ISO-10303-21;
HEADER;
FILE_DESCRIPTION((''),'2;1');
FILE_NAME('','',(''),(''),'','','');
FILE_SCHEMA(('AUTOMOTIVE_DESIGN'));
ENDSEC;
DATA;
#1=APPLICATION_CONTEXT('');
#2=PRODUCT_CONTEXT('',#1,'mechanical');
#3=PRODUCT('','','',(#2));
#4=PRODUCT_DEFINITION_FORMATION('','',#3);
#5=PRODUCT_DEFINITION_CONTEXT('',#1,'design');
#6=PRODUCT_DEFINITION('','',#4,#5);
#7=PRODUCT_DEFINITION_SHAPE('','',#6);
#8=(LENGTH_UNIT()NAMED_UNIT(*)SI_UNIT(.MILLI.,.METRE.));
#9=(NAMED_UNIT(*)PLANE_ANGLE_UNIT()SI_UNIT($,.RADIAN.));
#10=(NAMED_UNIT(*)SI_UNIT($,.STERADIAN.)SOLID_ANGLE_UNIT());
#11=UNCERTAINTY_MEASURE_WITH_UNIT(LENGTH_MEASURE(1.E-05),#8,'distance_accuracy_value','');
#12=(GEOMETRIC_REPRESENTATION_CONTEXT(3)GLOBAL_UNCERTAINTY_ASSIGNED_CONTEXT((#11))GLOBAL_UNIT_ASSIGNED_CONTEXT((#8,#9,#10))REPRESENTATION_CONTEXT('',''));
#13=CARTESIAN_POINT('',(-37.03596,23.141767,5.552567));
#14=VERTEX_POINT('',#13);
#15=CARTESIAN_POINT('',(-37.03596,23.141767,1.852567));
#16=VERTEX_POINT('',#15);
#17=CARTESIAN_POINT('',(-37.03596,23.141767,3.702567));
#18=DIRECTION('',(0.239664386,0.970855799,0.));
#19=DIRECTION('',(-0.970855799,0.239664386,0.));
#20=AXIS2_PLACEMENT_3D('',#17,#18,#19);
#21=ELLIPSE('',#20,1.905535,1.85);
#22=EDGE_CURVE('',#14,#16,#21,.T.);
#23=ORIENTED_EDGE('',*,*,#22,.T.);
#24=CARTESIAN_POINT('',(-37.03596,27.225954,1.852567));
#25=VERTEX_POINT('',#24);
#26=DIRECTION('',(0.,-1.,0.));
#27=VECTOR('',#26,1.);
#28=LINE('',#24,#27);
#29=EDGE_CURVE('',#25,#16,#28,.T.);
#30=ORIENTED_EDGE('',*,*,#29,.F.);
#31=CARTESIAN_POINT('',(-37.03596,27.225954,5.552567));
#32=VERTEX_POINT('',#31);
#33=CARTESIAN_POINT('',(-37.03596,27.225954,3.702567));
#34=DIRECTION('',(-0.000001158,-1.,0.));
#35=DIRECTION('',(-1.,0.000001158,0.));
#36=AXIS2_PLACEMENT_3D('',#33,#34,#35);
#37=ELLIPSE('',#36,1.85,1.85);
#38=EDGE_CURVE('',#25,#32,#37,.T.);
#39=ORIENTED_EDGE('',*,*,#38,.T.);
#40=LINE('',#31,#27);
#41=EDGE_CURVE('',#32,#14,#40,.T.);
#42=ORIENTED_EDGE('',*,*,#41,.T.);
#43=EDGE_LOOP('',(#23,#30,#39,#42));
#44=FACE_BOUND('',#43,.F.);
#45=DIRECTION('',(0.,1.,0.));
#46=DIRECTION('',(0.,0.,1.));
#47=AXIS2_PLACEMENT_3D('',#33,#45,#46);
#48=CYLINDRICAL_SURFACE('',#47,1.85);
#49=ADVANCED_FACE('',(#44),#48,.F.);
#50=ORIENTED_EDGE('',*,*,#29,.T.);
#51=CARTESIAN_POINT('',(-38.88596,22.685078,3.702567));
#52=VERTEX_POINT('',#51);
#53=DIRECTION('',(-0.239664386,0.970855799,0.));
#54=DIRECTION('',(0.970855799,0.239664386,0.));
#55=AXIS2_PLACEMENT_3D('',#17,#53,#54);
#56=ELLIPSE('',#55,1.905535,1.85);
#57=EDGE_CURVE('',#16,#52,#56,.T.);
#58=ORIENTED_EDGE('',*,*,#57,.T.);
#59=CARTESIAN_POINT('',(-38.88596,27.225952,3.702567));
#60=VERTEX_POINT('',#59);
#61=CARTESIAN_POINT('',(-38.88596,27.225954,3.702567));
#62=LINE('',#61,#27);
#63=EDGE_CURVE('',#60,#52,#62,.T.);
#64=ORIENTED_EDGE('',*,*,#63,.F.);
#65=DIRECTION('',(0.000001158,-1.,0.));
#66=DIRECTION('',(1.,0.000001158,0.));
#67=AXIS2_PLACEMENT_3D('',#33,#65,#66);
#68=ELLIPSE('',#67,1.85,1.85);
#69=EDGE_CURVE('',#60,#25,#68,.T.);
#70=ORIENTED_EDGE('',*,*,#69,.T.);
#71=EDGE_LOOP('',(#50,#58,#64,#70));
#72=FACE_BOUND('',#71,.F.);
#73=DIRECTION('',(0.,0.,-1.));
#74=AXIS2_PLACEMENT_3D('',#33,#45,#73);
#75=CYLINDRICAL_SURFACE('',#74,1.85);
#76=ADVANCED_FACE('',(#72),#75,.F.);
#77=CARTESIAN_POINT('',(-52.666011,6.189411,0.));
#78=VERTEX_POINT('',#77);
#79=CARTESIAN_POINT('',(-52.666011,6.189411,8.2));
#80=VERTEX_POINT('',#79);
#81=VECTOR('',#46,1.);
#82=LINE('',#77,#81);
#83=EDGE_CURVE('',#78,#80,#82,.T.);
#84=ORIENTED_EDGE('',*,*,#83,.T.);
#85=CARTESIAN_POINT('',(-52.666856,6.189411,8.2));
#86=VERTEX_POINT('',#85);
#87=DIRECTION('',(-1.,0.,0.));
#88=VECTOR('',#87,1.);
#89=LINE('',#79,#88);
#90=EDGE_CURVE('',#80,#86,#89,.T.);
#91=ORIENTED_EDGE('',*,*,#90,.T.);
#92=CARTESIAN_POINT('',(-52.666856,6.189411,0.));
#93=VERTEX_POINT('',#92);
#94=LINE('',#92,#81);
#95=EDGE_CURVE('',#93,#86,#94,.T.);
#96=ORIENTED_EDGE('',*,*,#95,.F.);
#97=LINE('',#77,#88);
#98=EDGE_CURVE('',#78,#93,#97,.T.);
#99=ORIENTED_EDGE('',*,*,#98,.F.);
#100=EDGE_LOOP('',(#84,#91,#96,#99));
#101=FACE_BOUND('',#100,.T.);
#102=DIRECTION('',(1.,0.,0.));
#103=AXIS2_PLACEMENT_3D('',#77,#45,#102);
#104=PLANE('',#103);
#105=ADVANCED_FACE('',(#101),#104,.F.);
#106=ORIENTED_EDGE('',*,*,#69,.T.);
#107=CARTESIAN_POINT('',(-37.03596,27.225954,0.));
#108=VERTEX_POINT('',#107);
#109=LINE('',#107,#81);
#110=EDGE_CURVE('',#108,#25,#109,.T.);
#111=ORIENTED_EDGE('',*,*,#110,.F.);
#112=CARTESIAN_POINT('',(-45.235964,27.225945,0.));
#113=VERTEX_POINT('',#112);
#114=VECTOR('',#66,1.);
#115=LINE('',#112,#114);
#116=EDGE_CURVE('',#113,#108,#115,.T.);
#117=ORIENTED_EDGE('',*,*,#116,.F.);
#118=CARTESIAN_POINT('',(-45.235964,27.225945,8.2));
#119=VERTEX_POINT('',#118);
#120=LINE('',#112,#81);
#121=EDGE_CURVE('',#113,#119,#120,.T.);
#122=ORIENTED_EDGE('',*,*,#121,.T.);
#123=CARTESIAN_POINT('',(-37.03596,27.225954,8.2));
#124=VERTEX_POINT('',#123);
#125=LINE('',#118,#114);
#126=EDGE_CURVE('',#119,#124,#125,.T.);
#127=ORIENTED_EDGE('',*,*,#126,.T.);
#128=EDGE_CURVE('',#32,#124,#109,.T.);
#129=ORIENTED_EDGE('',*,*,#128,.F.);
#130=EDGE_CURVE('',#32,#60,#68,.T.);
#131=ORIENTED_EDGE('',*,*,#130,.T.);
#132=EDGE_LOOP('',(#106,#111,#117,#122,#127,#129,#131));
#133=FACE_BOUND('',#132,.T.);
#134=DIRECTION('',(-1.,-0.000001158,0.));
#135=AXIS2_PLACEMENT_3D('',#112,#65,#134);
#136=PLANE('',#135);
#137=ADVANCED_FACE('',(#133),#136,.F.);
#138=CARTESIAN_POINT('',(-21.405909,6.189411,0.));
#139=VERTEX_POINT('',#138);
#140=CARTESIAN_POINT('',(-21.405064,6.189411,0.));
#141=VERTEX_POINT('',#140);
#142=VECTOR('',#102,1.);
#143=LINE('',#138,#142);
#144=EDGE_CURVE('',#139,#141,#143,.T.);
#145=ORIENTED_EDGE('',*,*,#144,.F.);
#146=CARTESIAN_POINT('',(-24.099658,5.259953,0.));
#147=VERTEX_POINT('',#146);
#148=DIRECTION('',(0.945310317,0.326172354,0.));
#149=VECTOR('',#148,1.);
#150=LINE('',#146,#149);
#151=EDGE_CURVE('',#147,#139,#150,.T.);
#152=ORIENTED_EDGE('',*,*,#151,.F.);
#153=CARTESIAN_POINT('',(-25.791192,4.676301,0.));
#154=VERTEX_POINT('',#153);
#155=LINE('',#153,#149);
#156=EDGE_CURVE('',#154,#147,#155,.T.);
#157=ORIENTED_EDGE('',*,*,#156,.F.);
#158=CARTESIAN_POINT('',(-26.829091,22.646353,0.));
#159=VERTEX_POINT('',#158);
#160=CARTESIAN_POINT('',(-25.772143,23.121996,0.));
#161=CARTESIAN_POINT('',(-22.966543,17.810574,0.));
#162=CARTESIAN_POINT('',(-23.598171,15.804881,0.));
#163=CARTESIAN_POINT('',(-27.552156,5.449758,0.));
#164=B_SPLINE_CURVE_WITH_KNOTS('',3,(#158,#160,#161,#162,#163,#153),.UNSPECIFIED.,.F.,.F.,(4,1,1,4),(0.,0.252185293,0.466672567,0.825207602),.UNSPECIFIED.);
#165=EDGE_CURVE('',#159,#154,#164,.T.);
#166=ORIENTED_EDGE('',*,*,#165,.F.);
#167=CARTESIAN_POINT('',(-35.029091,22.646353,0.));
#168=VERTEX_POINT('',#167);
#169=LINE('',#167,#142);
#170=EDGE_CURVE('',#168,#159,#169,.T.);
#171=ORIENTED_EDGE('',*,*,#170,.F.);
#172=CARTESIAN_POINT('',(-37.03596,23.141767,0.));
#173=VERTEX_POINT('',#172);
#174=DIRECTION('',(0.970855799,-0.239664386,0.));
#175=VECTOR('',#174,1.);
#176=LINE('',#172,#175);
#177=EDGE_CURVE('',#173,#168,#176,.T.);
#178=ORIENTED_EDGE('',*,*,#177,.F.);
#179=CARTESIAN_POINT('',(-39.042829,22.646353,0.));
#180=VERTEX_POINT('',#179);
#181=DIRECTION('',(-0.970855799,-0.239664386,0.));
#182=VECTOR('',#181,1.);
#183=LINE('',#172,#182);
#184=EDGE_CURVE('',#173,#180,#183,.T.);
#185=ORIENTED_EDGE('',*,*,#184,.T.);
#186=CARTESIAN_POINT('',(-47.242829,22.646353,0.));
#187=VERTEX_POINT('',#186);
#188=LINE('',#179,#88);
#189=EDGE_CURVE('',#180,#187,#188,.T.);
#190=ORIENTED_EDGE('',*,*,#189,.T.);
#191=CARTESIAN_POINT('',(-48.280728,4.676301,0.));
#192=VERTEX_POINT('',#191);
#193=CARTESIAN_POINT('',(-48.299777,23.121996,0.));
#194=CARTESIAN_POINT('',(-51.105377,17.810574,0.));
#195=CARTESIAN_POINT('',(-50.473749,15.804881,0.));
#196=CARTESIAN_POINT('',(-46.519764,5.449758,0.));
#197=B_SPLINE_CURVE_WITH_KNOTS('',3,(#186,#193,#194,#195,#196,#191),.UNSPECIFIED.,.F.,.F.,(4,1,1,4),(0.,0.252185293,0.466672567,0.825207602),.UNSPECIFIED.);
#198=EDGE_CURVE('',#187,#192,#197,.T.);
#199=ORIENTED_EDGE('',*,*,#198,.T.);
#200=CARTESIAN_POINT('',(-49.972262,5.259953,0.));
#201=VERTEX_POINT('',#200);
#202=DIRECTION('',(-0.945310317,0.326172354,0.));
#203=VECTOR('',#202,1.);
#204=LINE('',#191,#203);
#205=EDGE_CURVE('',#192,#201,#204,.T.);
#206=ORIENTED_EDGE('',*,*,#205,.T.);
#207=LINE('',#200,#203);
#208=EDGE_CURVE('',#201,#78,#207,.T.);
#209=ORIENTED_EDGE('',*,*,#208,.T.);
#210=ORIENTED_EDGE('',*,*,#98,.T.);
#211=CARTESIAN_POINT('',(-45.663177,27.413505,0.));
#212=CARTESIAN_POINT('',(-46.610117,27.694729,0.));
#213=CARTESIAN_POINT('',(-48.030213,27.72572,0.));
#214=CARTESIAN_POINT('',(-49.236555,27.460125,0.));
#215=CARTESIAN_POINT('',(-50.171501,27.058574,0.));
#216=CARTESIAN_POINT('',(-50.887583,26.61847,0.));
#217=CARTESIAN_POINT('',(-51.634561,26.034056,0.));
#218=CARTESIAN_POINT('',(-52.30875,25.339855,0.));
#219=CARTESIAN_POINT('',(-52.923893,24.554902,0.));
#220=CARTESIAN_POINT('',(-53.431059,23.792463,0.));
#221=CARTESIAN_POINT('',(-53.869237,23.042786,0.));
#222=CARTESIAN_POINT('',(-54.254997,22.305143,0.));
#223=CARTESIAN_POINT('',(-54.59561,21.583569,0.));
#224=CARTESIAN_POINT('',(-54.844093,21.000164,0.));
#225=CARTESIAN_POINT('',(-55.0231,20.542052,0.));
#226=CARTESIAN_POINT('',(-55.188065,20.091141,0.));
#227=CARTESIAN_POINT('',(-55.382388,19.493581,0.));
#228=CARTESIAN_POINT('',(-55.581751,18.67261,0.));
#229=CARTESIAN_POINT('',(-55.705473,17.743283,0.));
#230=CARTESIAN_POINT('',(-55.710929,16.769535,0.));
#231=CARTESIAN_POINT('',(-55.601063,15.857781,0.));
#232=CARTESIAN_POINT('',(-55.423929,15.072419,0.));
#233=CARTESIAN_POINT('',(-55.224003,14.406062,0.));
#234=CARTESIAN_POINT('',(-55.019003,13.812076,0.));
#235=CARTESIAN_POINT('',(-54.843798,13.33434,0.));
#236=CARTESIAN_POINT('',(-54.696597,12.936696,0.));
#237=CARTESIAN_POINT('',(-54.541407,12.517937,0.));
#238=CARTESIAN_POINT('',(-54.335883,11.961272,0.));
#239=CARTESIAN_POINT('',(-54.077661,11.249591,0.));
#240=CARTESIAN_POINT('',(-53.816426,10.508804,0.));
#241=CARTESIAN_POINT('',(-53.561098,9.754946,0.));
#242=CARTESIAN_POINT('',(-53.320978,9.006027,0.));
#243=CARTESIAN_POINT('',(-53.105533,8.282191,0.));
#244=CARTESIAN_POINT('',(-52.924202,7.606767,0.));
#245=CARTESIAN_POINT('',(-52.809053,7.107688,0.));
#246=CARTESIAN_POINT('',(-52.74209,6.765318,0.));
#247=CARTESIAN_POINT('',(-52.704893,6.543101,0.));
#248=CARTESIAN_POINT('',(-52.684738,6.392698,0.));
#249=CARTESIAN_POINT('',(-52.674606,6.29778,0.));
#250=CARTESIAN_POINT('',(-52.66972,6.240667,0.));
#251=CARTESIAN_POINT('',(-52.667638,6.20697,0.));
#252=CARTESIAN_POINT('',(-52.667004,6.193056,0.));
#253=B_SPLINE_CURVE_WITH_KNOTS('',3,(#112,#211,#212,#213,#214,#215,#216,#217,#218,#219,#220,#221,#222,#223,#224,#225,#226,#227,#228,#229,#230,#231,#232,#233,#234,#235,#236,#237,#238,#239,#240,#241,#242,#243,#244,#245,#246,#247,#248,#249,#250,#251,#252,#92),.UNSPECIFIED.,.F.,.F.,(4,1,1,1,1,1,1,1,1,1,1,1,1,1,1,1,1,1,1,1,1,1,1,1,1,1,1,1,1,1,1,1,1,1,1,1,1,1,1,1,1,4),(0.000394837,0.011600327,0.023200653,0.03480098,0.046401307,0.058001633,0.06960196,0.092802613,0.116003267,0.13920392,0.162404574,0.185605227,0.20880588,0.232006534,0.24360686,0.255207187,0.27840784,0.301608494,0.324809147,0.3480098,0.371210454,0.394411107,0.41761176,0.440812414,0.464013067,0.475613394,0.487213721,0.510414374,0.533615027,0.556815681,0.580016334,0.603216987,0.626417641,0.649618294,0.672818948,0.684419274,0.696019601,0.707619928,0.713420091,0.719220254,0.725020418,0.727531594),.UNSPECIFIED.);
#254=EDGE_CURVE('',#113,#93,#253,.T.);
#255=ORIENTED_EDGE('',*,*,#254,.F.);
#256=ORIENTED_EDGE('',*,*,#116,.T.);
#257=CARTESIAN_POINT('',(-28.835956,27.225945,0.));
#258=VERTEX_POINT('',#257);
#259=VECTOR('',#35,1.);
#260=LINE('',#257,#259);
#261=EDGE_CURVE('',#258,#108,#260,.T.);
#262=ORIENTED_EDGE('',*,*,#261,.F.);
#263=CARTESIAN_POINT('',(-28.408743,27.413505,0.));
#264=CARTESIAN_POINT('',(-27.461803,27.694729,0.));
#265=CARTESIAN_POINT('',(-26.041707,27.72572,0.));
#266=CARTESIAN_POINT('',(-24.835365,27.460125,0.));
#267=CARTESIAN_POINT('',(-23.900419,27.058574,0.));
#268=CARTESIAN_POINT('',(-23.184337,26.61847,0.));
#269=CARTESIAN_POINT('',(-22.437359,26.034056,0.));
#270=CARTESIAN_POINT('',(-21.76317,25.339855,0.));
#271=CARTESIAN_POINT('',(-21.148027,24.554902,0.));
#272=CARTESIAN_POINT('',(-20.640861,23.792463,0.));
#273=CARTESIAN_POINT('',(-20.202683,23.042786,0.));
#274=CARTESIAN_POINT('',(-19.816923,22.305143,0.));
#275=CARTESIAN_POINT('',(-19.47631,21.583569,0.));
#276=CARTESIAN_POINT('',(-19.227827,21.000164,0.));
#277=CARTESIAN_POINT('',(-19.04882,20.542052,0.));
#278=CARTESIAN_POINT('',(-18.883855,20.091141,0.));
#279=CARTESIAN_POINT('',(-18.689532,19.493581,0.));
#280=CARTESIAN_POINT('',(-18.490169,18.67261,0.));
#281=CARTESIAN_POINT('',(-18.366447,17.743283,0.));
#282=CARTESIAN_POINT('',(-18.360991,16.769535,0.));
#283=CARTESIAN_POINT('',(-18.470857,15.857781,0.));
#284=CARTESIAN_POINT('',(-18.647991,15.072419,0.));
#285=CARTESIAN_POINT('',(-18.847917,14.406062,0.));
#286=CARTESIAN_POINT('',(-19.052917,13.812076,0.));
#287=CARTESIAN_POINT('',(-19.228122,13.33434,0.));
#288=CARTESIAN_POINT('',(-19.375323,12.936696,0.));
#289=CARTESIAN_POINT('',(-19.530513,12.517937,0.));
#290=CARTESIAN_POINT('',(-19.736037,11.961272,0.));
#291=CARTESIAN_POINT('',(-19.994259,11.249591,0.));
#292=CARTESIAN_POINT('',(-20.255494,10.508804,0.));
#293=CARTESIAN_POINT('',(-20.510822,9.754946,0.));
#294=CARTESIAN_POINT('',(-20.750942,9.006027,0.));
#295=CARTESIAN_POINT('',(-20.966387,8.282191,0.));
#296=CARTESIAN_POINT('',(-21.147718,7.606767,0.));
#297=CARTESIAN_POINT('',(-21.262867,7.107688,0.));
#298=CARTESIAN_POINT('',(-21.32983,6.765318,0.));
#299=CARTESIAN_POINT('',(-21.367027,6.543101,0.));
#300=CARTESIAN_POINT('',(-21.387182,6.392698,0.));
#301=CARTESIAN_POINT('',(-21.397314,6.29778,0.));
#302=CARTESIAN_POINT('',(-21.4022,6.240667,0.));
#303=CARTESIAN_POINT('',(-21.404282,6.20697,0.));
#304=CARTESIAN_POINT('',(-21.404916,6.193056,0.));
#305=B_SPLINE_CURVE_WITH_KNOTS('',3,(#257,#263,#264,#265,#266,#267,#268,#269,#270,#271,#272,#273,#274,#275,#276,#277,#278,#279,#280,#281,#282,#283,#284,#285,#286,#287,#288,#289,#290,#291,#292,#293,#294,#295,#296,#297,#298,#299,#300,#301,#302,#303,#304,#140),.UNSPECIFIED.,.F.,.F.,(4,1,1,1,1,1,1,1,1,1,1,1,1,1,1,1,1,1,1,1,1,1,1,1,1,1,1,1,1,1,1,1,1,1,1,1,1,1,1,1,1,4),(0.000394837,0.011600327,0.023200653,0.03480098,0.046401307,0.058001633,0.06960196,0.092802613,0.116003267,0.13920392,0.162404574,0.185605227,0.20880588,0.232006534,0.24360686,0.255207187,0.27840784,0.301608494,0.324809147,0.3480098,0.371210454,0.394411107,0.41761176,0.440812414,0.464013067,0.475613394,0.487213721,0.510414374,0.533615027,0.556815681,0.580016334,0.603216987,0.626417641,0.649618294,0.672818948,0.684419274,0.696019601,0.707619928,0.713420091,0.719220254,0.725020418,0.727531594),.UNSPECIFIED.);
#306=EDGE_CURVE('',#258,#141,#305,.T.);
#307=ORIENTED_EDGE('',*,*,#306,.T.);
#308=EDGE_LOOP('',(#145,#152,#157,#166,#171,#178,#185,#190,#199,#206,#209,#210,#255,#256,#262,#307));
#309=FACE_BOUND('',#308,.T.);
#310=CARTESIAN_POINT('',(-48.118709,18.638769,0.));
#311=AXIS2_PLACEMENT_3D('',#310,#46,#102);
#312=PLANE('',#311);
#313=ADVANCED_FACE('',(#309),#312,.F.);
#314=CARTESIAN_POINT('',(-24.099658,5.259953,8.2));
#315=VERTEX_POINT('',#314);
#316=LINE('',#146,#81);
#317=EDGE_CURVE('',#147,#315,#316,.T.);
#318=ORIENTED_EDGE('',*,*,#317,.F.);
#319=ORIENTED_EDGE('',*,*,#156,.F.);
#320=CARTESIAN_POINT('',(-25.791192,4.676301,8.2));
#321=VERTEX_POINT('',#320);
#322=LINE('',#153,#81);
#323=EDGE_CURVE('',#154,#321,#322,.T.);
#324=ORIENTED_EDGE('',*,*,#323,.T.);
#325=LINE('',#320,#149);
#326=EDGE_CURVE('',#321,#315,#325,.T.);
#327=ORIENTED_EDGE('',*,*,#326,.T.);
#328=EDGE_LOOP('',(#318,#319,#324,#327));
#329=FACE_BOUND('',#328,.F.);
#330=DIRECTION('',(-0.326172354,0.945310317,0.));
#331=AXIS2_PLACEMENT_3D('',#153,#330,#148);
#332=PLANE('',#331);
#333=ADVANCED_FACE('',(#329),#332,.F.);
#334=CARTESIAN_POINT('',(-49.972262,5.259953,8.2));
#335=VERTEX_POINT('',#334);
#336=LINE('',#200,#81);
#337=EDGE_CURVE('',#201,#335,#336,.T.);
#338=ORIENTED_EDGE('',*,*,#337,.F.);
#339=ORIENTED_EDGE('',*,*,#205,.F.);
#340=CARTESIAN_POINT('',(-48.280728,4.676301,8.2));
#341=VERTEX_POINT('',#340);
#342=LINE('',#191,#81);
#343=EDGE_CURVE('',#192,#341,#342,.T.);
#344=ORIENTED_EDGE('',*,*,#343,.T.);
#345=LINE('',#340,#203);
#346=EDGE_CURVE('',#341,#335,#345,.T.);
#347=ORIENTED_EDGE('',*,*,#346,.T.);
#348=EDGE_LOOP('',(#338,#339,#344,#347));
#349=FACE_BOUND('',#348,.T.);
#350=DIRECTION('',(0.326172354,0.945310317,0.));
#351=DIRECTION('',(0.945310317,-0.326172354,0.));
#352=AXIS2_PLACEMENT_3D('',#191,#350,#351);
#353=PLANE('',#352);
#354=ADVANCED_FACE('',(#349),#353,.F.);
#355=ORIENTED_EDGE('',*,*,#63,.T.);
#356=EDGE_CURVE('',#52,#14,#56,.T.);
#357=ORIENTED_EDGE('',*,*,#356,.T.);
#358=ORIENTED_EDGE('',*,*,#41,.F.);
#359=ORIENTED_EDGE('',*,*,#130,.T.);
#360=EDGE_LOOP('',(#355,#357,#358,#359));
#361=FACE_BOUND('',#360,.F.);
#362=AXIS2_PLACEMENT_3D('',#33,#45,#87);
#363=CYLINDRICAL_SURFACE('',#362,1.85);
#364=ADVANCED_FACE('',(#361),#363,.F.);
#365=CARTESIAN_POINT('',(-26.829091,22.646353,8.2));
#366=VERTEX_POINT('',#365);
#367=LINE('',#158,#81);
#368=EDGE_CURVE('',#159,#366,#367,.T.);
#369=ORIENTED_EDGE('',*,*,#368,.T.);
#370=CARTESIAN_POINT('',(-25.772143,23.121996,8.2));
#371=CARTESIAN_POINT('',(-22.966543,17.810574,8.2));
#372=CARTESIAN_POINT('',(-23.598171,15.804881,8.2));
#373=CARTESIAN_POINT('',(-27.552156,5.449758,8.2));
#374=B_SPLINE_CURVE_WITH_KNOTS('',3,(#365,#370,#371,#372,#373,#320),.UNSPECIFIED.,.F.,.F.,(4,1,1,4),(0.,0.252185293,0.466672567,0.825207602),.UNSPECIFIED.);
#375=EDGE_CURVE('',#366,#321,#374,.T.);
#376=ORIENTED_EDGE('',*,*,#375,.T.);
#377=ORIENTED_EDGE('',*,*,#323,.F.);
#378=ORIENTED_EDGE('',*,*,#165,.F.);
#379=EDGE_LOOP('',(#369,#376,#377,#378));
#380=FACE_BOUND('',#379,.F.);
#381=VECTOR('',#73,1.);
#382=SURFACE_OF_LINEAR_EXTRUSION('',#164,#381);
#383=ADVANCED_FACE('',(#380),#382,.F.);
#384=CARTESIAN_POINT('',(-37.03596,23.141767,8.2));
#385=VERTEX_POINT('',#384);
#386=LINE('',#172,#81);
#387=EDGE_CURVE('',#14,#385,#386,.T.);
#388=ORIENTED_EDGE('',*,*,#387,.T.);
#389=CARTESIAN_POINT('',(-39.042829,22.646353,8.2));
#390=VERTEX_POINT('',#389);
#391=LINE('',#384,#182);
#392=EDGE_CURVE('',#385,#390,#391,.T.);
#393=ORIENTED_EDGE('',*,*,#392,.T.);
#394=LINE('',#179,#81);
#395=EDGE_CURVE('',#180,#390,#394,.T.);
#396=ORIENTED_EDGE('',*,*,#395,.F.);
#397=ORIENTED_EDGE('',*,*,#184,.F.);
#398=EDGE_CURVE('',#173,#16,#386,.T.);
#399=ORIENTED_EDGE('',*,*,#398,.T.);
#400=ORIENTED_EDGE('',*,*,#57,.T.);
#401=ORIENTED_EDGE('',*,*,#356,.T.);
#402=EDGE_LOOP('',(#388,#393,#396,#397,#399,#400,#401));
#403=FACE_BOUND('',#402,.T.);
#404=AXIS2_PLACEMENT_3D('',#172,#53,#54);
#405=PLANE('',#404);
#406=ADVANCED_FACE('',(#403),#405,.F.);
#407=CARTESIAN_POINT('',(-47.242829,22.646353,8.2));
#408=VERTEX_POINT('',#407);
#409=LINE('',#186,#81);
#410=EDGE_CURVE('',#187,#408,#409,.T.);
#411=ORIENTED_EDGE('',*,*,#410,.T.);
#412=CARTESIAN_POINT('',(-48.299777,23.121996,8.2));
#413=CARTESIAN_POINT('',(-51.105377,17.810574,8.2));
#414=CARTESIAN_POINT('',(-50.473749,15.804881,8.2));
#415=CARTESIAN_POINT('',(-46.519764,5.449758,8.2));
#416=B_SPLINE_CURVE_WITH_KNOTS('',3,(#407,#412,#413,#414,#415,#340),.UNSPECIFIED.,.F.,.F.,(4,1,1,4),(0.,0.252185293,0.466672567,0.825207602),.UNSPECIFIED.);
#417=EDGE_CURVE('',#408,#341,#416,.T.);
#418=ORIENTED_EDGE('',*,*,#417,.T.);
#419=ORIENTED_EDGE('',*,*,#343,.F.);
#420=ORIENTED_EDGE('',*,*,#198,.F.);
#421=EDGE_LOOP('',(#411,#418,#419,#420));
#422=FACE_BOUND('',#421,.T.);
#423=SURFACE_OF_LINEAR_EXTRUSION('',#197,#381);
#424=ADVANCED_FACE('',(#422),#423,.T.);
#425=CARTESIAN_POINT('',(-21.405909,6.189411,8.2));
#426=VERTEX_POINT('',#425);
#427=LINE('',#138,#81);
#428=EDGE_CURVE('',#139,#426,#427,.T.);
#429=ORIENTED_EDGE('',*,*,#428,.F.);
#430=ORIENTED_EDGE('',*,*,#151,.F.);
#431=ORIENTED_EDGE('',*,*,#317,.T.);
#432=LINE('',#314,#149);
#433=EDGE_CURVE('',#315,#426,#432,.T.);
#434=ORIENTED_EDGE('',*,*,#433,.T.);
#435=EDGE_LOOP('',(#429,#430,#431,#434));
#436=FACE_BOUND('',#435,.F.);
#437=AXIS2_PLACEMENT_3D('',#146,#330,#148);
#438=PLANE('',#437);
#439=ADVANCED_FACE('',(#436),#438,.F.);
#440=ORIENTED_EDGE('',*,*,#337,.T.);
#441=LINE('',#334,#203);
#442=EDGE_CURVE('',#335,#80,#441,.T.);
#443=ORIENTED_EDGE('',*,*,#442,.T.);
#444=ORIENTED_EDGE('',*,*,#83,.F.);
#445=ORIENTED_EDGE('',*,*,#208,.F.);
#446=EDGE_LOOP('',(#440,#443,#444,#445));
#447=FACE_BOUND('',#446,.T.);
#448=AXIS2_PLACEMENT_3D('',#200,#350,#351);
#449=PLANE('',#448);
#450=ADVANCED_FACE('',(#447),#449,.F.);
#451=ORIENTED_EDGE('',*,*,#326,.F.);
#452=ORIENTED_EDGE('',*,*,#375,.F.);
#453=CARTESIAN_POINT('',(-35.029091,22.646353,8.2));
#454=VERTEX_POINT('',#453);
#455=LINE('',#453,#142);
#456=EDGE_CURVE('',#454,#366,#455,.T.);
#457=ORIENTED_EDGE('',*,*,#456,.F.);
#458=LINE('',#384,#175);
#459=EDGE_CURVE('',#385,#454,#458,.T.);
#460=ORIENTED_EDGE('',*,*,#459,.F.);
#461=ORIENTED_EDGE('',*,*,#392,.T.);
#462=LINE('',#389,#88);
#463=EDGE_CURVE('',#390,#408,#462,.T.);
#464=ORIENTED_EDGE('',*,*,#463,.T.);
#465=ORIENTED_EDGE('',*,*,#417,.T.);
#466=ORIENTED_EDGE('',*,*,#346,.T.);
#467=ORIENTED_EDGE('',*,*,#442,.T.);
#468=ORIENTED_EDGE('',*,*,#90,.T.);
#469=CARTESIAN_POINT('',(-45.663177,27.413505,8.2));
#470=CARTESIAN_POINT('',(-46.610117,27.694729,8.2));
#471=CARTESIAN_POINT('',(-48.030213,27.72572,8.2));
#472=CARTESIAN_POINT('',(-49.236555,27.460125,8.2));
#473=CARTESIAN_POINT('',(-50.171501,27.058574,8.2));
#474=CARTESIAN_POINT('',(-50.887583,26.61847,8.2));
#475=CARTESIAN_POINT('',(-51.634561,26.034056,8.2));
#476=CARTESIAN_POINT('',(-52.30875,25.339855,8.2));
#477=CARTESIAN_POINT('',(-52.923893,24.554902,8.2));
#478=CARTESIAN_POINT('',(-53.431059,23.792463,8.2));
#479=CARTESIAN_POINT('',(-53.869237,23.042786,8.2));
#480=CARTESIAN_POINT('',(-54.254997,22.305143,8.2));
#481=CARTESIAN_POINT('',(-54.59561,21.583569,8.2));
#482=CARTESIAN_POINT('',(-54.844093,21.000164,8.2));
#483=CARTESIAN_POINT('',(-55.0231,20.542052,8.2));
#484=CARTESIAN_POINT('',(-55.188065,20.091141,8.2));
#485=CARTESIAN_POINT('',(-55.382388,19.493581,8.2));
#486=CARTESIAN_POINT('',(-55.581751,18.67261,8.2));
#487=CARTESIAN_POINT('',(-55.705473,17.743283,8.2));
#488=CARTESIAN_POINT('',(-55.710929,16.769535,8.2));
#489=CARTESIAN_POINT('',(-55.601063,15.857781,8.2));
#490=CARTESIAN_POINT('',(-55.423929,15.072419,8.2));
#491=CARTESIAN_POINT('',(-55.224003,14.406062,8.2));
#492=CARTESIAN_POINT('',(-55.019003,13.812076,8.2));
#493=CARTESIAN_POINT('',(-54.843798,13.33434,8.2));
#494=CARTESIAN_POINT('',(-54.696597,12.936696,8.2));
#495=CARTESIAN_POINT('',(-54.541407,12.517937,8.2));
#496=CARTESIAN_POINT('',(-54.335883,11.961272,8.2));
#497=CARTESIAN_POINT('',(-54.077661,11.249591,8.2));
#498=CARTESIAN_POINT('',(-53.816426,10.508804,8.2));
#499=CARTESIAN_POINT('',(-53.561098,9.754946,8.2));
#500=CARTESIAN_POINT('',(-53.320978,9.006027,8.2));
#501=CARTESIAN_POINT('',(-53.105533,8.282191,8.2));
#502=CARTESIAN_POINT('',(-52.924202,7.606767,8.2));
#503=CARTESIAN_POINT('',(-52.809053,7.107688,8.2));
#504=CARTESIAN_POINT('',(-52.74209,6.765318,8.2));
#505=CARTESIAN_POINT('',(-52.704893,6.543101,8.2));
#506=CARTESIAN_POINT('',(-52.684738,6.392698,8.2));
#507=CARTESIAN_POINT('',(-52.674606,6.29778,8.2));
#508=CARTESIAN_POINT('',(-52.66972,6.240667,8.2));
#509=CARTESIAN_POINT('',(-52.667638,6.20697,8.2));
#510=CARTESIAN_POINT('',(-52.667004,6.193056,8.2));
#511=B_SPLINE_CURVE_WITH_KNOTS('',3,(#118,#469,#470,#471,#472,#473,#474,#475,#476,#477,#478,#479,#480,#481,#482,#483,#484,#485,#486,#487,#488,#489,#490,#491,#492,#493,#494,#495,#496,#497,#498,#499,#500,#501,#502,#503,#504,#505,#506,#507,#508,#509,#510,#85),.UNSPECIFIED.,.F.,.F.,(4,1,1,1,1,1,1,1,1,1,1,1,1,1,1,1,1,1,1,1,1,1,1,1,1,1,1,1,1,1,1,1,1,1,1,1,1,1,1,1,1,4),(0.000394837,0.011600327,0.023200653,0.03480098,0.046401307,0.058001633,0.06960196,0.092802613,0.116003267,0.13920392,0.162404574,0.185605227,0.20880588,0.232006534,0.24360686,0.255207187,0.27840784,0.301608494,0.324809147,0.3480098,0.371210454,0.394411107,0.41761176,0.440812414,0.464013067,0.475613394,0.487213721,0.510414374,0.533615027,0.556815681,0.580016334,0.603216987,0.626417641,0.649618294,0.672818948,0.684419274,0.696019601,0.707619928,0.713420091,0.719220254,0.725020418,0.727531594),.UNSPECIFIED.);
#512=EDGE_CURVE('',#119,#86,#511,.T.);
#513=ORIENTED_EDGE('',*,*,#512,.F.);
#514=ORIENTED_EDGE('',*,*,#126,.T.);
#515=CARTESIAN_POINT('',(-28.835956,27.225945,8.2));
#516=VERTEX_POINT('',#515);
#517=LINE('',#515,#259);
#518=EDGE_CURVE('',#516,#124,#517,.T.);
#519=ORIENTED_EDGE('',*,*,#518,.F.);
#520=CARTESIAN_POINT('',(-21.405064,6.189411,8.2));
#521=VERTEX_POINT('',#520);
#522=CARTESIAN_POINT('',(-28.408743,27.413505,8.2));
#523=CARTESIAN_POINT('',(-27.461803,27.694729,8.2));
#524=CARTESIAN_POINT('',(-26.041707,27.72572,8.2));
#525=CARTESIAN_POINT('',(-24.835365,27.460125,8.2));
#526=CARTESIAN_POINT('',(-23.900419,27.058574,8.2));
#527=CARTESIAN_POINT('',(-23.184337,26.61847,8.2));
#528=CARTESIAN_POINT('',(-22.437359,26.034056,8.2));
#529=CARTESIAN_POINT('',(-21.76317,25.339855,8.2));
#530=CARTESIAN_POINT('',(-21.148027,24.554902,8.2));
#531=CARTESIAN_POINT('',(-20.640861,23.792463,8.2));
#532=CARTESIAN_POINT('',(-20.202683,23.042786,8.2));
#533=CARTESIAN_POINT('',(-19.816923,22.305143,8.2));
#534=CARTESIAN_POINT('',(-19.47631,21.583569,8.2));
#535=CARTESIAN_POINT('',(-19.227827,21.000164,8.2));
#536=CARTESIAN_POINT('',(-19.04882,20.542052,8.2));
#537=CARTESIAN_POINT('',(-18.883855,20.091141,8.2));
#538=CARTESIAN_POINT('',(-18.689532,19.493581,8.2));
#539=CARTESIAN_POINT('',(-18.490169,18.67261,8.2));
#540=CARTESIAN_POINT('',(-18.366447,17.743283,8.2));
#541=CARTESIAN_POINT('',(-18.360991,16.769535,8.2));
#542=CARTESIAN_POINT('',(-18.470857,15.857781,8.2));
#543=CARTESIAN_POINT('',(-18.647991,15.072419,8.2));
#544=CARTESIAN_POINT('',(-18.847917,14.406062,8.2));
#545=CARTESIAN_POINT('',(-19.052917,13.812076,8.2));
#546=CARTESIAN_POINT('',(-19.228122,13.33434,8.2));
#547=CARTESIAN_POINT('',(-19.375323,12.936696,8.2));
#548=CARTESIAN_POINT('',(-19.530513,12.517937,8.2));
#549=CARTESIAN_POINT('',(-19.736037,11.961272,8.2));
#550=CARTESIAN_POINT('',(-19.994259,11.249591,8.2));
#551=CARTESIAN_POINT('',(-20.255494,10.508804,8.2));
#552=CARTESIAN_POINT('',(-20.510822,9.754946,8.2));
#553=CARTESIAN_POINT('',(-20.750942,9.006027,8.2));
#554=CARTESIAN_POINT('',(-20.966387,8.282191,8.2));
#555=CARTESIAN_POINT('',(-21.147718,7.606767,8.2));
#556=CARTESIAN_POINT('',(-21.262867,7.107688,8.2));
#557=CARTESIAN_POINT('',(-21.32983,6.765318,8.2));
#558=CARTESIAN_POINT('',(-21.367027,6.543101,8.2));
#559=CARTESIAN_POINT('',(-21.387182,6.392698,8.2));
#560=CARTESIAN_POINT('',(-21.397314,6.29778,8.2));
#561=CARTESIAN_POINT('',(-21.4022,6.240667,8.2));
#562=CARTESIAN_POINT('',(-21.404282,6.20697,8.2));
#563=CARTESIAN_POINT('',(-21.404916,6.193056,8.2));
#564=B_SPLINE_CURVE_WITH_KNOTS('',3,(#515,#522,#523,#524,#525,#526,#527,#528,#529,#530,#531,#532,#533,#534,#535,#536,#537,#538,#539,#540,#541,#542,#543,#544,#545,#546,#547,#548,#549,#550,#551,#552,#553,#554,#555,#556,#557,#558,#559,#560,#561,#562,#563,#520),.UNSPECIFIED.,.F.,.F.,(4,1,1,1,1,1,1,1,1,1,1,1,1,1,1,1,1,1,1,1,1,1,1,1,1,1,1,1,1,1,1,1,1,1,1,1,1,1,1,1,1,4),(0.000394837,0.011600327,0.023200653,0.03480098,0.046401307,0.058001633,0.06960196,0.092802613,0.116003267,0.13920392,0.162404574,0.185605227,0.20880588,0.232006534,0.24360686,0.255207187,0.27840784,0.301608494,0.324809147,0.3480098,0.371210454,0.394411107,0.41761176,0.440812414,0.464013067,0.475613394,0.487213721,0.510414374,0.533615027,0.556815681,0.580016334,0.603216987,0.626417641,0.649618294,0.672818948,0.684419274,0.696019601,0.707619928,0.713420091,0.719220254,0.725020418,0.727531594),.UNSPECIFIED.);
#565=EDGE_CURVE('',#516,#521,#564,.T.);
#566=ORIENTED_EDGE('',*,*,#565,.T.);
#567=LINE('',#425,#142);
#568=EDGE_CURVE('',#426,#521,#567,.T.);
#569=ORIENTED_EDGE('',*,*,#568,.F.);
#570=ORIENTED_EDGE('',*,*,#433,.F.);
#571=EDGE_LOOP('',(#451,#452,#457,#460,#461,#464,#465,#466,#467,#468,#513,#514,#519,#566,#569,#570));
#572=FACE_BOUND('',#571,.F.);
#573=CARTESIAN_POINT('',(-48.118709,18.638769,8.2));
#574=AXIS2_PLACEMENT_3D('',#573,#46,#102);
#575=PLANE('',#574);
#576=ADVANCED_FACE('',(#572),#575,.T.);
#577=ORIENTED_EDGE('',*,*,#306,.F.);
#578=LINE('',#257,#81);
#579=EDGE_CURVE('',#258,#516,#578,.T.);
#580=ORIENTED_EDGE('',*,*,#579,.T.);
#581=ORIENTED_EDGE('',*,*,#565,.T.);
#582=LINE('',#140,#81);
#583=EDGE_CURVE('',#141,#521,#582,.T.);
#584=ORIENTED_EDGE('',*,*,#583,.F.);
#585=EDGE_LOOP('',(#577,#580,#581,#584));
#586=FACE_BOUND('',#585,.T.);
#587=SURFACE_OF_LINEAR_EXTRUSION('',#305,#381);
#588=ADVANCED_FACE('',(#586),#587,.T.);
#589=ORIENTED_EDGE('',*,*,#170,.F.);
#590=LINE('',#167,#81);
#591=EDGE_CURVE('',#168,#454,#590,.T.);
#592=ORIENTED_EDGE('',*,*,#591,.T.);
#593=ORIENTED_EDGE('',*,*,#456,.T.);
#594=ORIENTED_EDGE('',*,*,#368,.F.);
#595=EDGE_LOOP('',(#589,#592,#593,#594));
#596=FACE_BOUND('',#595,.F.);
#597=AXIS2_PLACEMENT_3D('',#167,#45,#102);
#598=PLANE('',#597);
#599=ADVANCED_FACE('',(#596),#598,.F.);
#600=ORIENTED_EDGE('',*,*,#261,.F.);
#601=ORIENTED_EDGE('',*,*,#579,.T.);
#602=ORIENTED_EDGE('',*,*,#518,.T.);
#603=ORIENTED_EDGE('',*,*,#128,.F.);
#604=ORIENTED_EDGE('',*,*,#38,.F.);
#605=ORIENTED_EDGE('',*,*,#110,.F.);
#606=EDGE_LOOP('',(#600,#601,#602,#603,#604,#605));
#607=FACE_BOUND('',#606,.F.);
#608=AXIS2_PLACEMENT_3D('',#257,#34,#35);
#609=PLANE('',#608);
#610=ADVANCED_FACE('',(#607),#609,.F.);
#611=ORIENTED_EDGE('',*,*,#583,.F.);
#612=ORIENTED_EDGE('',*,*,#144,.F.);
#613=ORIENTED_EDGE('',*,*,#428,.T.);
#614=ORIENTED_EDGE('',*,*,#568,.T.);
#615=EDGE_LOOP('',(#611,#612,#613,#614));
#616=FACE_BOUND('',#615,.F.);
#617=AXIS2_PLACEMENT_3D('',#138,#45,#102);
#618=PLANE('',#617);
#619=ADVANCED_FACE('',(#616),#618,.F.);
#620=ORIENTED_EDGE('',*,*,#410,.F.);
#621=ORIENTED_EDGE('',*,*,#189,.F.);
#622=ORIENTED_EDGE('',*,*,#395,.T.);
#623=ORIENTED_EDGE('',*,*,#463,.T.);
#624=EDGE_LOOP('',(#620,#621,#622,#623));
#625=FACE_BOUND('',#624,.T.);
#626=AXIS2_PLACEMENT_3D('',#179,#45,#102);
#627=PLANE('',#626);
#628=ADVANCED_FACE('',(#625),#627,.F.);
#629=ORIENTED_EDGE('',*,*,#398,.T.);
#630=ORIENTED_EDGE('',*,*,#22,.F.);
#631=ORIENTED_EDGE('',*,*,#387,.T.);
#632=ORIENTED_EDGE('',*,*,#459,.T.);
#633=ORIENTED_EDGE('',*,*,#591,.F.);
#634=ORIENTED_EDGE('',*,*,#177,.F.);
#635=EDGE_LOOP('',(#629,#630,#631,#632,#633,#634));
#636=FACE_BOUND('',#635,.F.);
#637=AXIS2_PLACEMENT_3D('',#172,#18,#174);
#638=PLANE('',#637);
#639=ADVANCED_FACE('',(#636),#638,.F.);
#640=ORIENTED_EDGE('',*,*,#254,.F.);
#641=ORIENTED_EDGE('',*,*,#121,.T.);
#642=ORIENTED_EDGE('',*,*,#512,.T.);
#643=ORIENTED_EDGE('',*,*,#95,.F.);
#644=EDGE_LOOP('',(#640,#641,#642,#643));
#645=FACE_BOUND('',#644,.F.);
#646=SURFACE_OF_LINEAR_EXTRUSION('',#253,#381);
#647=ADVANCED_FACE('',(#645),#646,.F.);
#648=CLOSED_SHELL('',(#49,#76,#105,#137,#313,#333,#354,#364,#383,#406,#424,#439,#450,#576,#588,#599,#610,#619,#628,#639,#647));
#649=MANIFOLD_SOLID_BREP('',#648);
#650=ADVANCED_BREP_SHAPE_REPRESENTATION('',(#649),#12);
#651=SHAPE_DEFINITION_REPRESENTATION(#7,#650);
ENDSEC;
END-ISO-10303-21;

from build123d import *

# Parameters (mm, degrees)
F1_DEPTH = 8.2
F3_DEPTH = 25


# Not quite as in the source:
# - ends of sketch curves that miss each other by under 0.0002 mm in the source are joined
# - the dataset's text gives a spline's control points without its knots; the knots are read off the source's solid
# - a pattern or mirror of a feature is missing from the dataset's text; its kind, count and spacing are read off the source's solid


with BuildPart() as f1:
    # F0 (on Top) → F1 (new body)
    with BuildSketch(Plane.XY):
        with BuildLine():
            Line((-37.0359601621, 23.1417666937), (-35.029091494, 22.6463533197))
            Line((-35.029091494, 22.6463533197), (-26.829091494, 22.6463533197))
            add(Edge.make_bspline(
                [(-26.829091494, 22.6463533197), (-25.7721428325, 23.1219962444), (-22.9665433892, 17.8105744751), (-23.5981705487, 15.8048806569), (-27.5521563785, 5.4497575462), (-25.7911923863, 4.6763014154)],
                knots=[0, 0, 0, 0, 0.2521852928, 0.4666725674, 0.8252076015, 0.8252076015, 0.8252076015, 0.8252076015], degree=3))
            Line((-25.7911923863, 4.6763014154), (-24.099657673, 5.2599529941))
            Line((-24.099657673, 5.2599529941), (-21.4059092103, 6.1894110363))
            Line((-21.4059092103, 6.1894110363), (-21.4050641235, 6.1894110363))
            add(Edge.make_bspline(
                [(-28.8359559952, 27.225944927), (-28.4087434092, 27.4135047639), (-27.461802942, 27.6947287822), (-26.0417066535, 27.7257196671), (-24.8353649276, 27.4601249921), (-23.9004186629, 27.0585739987), (-23.1843370857, 26.6184702518), (-22.4373585387, 26.0340557803), (-21.7631698126, 25.3398551699), (-21.1480273409, 24.554901765), (-20.6408614836, 23.7924626862), (-20.2026828578, 23.0427855335), (-19.8169228918, 22.3051432259), (-19.476310452, 21.5835694031), (-19.2278267827, 21.0001643914), (-19.0488195155, 20.5420522561), (-18.8838554818, 20.0911409469), (-18.6895322517, 19.4935806167), (-18.4901693693, 18.6726095213), (-18.3664465965, 17.7432833331), (-18.3609909796, 16.7695348289), (-18.4708571085, 15.8577813838), (-18.6479909216, 15.0724194112), (-18.8479168659, 14.4060621583), (-19.0529170081, 13.8120761286), (-19.2281223024, 13.334340092), (-19.3753234655, 12.936696475), (-19.5305126309, 12.5179372236), (-19.7360371834, 11.9612723557), (-19.9942594284, 11.2495910041), (-20.2554944535, 10.5088037417), (-20.5108215915, 9.754945553), (-20.7509423149, 9.0060269452), (-20.9663871112, 8.282191306), (-21.1477182444, 7.6067669982), (-21.2628667399, 7.1076882355), (-21.3298297483, 6.7653175811), (-21.3670272177, 6.5431005017), (-21.3871822352, 6.3926980646), (-21.3973135938, 6.2977804421), (-21.4021997343, 6.2406673891), (-21.4042820534, 6.2069697584), (-21.4049161845, 6.1930561896), (-21.4050641235, 6.1894110363)],
                knots=[0.0003948374, 0.0003948374, 0.0003948374, 0.0003948374, 0.0116003267, 0.0232006534, 0.03480098, 0.0464013067, 0.0580016334, 0.0696019601, 0.0928026134, 0.1160032668, 0.1392039202, 0.1624045735, 0.1856052269, 0.2088058803, 0.2320065336, 0.2436068603, 0.255207187, 0.2784078403, 0.3016084937, 0.3248091471, 0.3480098004, 0.3712104538, 0.3944111071, 0.4176117605, 0.4408124139, 0.4640130672, 0.4756133939, 0.4872137206, 0.5104143739, 0.5336150273, 0.5568156807, 0.580016334, 0.6032169874, 0.6264176408, 0.6496182941, 0.6728189475, 0.6844192742, 0.6960196008, 0.7076199275, 0.7134200909, 0.7192202542, 0.7250204175, 0.7275315943, 0.7275315943, 0.7275315943, 0.7275315943], degree=3))
            Line((-28.8359559952, 27.225944927), (-37.0359601621, 27.2259544187))
            Line((-37.0359601621, 27.2259544187), (-37.0359601621, 23.1417666937))
        make_face()
    extrude(amount=F1_DEPTH)

    # F1_copies: F1 across plane


with BuildPart() as f1_1:
    add(f1.part)
    add(f1.part.mirror(Plane(origin=(-37.03596, 0, 0), x_dir=(0, 0, -1), z_dir=(-1, 0, 0))))

    # F2 (on face) → F3 (cut)
    with BuildSketch(Plane(origin=(0, 27.2259544187, 0), x_dir=(-1, 0, 0), z_dir=(0, 1, 0))):
        with BuildLine():
            Line((37.0359601621, 1.852566959), (37.0359601621, 5.552566959))
            ThreePointArc((37.0359601621, 5.552566959), (35.1859601621, 3.702566959), (37.0359601621, 1.852566959))
        make_face()
        with BuildLine():
            ThreePointArc((37.0359601621, 1.852566959), (38.3441077073, 2.3944194138), (38.8859601621, 3.702566959))
            ThreePointArc((38.8859601621, 3.702566959), (38.3441077073, 5.0107145042), (37.0359601621, 5.552566959))
            Line((37.0359601621, 5.552566959), (37.0359601621, 1.852566959))
        make_face()
    extrude(amount=-F3_DEPTH, mode=Mode.SUBTRACT)


solid = f1_1.part
